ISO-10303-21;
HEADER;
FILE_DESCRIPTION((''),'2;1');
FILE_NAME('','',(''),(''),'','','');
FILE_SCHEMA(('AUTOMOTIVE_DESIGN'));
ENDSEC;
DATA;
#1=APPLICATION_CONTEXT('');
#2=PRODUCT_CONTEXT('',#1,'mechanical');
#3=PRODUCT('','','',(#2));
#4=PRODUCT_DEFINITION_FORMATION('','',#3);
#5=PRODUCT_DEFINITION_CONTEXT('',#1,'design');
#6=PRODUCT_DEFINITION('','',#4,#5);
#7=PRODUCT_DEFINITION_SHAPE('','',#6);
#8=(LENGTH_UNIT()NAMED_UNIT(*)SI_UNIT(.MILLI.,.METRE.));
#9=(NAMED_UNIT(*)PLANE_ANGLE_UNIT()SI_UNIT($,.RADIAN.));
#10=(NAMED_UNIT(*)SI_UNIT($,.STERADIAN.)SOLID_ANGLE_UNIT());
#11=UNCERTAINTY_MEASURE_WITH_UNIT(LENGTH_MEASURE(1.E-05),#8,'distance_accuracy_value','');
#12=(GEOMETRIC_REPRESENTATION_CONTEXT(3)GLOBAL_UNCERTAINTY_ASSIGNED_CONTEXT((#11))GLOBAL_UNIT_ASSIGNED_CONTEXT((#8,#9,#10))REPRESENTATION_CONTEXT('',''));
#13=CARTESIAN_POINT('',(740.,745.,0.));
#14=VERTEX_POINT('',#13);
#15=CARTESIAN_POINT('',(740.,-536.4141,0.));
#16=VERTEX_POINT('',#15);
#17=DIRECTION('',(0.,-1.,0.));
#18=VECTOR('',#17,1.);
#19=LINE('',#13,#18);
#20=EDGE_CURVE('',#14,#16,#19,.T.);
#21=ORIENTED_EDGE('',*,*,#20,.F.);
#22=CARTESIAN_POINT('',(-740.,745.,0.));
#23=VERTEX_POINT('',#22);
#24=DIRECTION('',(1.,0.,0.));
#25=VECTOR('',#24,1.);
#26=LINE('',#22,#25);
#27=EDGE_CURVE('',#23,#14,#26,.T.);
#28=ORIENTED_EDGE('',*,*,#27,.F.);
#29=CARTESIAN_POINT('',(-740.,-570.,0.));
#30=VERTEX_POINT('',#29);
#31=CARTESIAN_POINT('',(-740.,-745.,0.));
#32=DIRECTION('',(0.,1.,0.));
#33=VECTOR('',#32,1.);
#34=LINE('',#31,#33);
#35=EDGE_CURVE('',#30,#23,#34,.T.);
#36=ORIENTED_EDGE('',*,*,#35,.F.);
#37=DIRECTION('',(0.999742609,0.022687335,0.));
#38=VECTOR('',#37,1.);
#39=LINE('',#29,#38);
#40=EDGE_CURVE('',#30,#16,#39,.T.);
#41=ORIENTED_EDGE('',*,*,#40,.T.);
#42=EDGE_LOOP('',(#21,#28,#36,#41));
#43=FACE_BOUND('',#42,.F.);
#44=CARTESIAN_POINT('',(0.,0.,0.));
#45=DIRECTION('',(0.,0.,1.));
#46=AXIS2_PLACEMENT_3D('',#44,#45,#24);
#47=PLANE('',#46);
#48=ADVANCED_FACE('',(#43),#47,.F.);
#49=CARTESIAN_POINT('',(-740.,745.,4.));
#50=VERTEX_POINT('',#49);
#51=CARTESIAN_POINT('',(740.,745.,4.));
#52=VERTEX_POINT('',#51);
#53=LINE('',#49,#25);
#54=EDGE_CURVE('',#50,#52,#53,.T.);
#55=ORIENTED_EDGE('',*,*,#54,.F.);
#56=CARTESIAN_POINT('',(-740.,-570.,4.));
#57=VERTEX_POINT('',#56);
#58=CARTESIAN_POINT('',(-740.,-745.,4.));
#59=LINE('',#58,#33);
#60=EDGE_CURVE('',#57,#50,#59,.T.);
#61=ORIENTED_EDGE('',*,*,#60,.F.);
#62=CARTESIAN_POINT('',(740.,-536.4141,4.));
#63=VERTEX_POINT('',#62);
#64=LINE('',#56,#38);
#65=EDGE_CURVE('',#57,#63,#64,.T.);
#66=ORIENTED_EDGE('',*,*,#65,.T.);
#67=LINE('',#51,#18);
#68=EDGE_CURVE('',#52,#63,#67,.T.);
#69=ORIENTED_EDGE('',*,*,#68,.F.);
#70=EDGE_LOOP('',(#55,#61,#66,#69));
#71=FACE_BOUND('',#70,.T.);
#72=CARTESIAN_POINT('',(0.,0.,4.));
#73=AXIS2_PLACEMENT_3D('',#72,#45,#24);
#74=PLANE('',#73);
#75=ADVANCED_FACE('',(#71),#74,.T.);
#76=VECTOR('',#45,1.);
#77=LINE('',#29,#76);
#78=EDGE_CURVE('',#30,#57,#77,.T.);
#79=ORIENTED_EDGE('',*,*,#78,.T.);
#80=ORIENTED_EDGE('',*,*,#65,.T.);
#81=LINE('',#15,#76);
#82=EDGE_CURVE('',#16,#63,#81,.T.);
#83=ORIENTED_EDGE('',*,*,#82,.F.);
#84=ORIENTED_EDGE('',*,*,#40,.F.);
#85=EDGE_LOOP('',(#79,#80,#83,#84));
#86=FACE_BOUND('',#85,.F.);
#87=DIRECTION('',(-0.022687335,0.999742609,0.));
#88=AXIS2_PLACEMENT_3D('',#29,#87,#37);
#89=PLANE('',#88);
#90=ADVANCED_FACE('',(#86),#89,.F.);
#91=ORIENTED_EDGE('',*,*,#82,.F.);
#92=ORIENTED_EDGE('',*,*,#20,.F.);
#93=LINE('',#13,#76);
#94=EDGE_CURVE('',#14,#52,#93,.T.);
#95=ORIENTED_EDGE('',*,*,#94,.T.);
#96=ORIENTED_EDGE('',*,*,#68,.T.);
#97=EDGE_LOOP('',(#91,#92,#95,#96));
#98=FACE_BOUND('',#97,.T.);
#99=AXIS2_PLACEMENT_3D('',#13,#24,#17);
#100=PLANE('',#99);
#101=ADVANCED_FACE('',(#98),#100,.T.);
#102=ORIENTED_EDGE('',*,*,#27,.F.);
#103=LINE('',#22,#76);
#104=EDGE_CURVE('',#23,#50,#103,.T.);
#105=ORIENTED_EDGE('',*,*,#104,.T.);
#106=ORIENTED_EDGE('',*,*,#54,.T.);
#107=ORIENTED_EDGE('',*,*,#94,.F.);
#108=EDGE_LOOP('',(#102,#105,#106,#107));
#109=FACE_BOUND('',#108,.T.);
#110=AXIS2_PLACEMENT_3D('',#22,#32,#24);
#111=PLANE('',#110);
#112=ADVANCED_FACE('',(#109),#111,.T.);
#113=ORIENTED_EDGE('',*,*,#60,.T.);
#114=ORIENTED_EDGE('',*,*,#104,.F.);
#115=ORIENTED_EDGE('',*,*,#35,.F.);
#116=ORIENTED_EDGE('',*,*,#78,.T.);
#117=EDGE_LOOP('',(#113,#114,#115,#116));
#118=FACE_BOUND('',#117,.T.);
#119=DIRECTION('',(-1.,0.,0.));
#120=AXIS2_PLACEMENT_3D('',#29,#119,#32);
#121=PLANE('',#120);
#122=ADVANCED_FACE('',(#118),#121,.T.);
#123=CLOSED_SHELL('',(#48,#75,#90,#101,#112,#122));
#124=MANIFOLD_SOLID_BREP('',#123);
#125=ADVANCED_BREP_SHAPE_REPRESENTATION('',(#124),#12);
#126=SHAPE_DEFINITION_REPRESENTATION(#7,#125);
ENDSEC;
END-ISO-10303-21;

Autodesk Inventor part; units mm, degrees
ref_plane "YZ Plane" through (0, 0, 0) normal (1, 0, 0) x (0, 1, 0)
ref_plane "XZ Plane" through (0, 0, 0) normal (0, 1, 0) x (-1, 0, 0)
ref_plane "XY Plane" through (0, 0, 0) normal (0, 0, 1) x (1, 0, 0)
sketch "Sketch1" plane through (0, 0, 0) normal (0, 0, 1) x (1, 0, 0)
  line L0 (740, -745) -> (-740, -745)
  line L1 (-740, -745) -> (-740, 745)
  line L2 (-740, 745) -> (740, 745)
  line L3 (740, 745) -> (740, -745)
  line L4 (740, -745) -> (-740, 745) construction
  line L5 (-740, -745) -> (740, 745) construction
  line L6 (-740, -570) -> (740, -536.4141)
  point P0 (0, 0)
  dimension "d0" = 1480
  dimension "d1" = 1490
  dimension "d3" = 1.3
  dimension "d4" = 175
  dimension "d5" = 1315
extrude "Plate1" add sketch "Sketch1" along normal blind 4 contours L6 L1 L2 L3
sketch "Sketch3" plane through (0, 0, 0) normal (0, 0, -1) x (-1, 0, 0)
  line L0 (553.8358, -269.0943) -> (553.8358, -626.7848) construction
  line L1 (553.8358, -626.7848) -> (524.7661, -626.7848) construction
  line L2 (524.7661, -626.7848) -> (524.7661, -269.0943) construction
  line L3 (524.7661, -269.0943) -> (553.8358, -269.0943) construction
  line L4 (710, -489) -> (770, -489) projected
  line L5 (710, -489) -> (710, -485) projected
  line L6 (669.8628, -492.5) -> (669.8628, -589.5) projected
  line L7 (669.8628, -589.5) -> (665.8638, -589.5) projected
  line L8 (710, 7.6667) -> (770, 7.6667) projected
  line L9 (710, 7.6667) -> (710, 11.6667) projected
  line L10 (710, 504.3333) -> (770, 504.3333) projected
  line L11 (710, 504.3333) -> (710, 508.3333) projected
  ellipse E0 centre (669.8628, 745.5) end of major axis (669.8628, 775.5) minor radius 0.6803 (669.8628, 715.5) -> (669.8628, 775.5) ccw projected
  line L12 (669.8628, 715.5) -> (665.8638, 715.5) projected
  ellipse E1 centre (169.7342, 745.5) end of major axis (169.7342, 775.5) minor radius 0.6803 (169.7342, 715.5) -> (169.7342, 775.5) ccw projected
  line L13 (169.7342, 715.5) -> (165.7352, 715.5) projected
  ellipse E2 centre (-330.3944, 745.5) end of major axis (-330.3944, 775.5) minor radius 0.6803 (-330.3944, 715.5) -> (-330.3944, 775.5) ccw projected
  line L14 (-330.3944, 715.5) -> (-334.3934, 715.5) projected
  line L15 (-738.6395, 504.3333) -> (-680, 504.3333) projected
  line L16 (-680, 504.3333) -> (-680, 508.3333) projected
  line L17 (-738.6395, 7.6667) -> (-680, 7.6667) projected
  line L18 (-680, 7.6667) -> (-680, 11.6667) projected
  line L19 (-738.6395, -489) -> (-680, -489) projected
  line L20 (-680, -489) -> (-680, -485) projected
  line L21 (-330.3944, -492.5) -> (-330.3944, -589.5) projected
  line L22 (-330.3944, -589.5) -> (-334.3934, -589.5) projected
  line L23 (169.7342, -492.5) -> (169.7342, -589.5) projected
  line L24 (169.7342, -589.5) -> (165.7352, -589.5) projected
  point P0 (0, 0)
mark "Mark2"
equation "\"d0\" = Лист_ширина"
equation "\"d1\" = 0.5 * Лист_длина"
equation "\"d2\" = Thickness"
equation "\"BendRadius\" = Thickness"
equation "\"BendReliefWidth\" = Thickness"
equation "\"BendReliefDepth\" = 0.5 * Thickness"
equation "\"CornerReliefSize\" = 4 * Thickness"
equation "\"MinimumRemnant\" = 2 * Thickness"
equation "\"TransitionRadius\" = BendRadius"
equation "\"JacobiRadiusSize\" = BendRadius"
equation "\"GapSize\" = Thickness"
equation "\"Лист_ширина\" = 1480"
equation "\"Лист_длина\" = 2980"
equation "\"Thickness\" = 4"
properties part number "GBK 2111 shield 1" material "Steel"
